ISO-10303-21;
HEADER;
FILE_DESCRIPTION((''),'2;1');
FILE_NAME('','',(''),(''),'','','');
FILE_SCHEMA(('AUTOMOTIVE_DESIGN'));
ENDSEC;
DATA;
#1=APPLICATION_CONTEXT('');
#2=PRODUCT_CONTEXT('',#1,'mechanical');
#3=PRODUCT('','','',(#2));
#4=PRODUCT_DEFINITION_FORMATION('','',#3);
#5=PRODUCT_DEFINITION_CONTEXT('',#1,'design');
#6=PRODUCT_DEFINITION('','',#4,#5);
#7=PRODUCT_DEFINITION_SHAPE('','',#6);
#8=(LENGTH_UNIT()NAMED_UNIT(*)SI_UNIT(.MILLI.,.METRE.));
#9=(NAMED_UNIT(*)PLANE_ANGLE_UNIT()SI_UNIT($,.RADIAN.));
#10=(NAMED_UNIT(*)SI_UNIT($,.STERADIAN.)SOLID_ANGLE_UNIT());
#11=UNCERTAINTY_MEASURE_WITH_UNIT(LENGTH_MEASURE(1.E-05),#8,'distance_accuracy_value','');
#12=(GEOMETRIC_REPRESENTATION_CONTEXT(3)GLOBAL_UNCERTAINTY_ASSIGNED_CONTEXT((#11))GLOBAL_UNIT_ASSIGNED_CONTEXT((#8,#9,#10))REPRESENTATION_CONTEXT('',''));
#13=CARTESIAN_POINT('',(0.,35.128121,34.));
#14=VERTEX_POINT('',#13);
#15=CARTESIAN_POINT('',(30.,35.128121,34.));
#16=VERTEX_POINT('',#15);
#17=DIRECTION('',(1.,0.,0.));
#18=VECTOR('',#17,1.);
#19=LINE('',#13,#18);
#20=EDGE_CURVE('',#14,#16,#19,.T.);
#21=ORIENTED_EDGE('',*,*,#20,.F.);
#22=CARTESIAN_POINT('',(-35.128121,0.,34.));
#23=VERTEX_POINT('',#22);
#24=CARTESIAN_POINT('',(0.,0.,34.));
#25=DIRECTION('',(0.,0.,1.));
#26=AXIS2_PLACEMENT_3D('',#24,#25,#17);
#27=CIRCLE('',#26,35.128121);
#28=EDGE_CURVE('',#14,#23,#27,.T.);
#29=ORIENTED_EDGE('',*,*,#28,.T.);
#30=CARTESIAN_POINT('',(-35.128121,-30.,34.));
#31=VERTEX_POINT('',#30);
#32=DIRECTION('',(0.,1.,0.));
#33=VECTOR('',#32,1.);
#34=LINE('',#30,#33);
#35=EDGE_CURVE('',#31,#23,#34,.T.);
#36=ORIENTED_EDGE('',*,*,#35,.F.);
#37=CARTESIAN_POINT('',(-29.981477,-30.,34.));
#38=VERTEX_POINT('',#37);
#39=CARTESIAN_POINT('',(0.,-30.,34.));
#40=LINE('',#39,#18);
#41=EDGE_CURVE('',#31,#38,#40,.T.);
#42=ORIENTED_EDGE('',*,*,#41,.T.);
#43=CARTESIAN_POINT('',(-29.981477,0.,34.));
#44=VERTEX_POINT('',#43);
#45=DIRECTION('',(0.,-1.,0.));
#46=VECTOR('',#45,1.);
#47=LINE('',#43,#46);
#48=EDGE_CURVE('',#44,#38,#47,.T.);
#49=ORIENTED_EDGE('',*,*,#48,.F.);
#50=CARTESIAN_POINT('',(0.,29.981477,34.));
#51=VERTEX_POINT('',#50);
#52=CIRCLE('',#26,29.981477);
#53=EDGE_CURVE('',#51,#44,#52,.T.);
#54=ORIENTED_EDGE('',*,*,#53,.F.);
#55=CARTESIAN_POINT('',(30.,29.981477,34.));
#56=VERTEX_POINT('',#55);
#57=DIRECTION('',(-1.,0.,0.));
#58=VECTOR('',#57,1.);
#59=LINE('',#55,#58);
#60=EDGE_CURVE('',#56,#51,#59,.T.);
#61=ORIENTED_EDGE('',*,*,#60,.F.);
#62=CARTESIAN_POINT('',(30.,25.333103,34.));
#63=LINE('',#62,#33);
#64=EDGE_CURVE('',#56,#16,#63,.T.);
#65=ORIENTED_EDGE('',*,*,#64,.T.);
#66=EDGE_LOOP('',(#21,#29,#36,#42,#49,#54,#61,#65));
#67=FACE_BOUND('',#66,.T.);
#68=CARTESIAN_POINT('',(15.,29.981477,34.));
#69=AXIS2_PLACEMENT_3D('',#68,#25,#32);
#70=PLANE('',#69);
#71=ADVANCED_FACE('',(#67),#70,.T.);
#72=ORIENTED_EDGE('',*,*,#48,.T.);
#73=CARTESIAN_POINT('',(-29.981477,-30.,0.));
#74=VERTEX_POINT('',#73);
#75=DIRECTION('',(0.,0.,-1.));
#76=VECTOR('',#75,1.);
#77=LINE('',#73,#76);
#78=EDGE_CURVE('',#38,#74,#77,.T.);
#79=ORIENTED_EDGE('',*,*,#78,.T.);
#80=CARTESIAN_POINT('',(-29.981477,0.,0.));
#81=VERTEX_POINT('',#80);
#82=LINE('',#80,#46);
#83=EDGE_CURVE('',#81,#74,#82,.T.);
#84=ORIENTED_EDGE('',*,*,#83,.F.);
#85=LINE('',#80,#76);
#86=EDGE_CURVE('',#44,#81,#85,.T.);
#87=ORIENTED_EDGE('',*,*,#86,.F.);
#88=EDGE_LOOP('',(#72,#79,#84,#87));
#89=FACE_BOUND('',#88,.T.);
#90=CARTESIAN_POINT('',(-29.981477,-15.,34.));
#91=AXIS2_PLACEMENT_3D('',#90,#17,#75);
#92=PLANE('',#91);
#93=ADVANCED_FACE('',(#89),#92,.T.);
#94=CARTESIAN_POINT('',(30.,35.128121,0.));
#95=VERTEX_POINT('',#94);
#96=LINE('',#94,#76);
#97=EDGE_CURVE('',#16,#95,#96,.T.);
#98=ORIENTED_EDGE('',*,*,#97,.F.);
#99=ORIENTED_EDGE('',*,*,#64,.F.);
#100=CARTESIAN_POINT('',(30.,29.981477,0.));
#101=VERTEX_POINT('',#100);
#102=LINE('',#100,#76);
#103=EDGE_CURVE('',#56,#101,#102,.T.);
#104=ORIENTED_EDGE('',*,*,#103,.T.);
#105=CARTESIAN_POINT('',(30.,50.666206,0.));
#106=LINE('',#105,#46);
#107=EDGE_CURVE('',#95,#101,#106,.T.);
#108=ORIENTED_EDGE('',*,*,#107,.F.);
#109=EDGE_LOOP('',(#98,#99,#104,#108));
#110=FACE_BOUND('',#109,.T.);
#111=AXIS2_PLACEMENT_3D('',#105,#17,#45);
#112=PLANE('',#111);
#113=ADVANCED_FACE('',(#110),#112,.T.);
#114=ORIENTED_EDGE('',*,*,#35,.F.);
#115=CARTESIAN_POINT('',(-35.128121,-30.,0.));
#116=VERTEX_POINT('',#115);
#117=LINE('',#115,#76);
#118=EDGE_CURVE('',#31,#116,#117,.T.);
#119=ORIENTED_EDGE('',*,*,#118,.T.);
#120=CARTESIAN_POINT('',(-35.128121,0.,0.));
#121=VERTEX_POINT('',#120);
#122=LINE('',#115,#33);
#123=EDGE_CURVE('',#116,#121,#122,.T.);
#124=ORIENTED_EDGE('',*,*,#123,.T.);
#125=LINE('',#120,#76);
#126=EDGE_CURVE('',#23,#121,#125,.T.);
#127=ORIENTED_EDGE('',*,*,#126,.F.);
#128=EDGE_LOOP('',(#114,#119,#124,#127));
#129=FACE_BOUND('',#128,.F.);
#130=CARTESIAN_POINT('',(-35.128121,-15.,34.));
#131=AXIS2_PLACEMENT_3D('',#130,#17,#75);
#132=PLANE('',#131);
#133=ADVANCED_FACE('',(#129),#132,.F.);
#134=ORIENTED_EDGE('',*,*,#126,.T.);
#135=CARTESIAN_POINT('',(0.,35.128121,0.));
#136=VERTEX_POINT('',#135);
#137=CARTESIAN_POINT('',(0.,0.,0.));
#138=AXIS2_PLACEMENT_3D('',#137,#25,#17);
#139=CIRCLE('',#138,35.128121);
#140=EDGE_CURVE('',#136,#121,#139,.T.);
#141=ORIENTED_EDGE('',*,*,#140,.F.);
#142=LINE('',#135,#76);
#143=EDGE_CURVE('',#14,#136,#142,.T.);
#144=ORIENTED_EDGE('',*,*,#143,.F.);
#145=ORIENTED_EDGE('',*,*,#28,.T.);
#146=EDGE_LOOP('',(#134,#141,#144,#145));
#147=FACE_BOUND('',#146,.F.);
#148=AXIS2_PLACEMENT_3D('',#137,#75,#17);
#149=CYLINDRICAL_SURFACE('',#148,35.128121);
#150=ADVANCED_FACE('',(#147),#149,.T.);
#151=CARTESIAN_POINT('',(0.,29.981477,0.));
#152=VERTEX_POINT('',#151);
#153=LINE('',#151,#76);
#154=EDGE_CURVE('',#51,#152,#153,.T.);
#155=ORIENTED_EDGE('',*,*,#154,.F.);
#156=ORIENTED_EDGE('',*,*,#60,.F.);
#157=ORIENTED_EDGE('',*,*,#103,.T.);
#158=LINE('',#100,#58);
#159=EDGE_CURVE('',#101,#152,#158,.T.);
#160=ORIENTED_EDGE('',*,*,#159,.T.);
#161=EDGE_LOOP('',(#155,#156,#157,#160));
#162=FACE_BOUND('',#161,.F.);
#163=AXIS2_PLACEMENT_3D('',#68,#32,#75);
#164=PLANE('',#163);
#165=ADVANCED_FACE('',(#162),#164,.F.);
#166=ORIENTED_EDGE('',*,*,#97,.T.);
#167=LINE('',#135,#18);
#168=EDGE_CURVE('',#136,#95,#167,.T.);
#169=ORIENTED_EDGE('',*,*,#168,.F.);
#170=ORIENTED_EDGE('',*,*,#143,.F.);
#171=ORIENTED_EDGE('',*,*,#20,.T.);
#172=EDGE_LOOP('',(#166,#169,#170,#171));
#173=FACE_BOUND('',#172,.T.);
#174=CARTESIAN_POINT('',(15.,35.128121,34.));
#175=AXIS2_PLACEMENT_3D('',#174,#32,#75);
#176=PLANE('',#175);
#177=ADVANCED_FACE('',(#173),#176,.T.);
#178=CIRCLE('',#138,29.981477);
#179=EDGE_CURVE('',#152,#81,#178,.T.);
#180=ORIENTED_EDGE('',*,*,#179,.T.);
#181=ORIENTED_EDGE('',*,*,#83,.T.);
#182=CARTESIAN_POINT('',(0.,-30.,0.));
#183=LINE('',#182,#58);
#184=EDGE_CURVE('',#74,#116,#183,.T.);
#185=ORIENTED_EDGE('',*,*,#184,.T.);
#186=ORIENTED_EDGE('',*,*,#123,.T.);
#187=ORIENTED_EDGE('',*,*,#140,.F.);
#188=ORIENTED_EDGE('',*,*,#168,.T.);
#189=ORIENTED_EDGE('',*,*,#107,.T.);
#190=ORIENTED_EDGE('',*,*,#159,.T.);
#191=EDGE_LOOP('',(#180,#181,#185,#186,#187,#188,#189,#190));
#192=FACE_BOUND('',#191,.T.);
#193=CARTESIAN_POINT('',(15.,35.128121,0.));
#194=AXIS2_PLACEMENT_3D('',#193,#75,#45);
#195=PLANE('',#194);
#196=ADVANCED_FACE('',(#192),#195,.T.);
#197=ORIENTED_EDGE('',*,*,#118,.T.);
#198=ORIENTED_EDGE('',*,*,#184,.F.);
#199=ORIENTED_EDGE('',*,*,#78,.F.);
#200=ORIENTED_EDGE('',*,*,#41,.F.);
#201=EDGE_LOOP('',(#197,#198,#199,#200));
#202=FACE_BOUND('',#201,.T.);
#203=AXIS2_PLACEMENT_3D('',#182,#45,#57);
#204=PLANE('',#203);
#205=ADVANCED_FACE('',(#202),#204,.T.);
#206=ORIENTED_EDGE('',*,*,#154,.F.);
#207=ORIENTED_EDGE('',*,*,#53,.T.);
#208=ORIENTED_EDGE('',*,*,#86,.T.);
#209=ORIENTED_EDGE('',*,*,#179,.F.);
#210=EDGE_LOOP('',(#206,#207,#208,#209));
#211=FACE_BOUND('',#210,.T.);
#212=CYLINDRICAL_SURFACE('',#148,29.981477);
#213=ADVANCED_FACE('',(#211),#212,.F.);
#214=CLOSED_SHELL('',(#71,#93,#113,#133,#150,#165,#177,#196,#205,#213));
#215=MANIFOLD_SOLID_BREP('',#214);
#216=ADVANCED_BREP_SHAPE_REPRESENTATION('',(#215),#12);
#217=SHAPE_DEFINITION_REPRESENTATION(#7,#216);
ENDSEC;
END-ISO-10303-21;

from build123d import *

# Parameters (mm, degrees)
F0_R     = 35.128120954
F0_R_2   = 29.9814765583
F1_DEPTH = 34
F3_DEPTH = 56.7
F4_DEPTH = 15
F5_DEPTH = 15
F6_DEPTH = 15
F7_DEPTH = 15


# Not quite as in the source:
# - a feature names something its author has since deleted; it is built from what else it names


with BuildPart() as f1:
    # F0 (on Top) → F1 (new body)
    with BuildSketch(Plane.XY):
        Circle(F0_R)
        Circle(F0_R_2, mode=Mode.SUBTRACT)
    extrude(amount=F1_DEPTH)

    # F2 (on Top) → F3 (cut)
    with BuildSketch(Plane.XY):
        Polygon((0, 50.666205585), (0, 0), (-44.6641780436, 0), (-44.6641780436, -44.4084256887), (0, -44.4084256887), (0, -49.6323108673), (44.1417917609, -49.6323108673), (44.1417917609, 0), (47.7985069156, 0), (47.7985069156, 50.666205585), align=None)
    extrude(amount=F3_DEPTH, mode=Mode.SUBTRACT)

    # F4 (add): a face of the model
    f4_faces = [f1.faces().sort_by_distance(p)[0] for p in [
        (0, 32.5547987561, 17),
    ]]
    extrude(f4_faces, amount=F4_DEPTH)

    # F5 (add): a face of the model
    f5_faces = [f1.faces().sort_by_distance(p)[0] for p in [
        (-32.5547987561, 0, 17),
    ]]
    extrude(f5_faces, amount=F5_DEPTH)

    # F6 (add): a face of the model
    f6_faces = [f1.faces().sort_by_distance(p)[0] for p in [
        (-32.5547987561, -15, 17),
    ]]
    extrude(f6_faces, amount=F6_DEPTH)

    # F7 (add): a face of the model
    f7_faces = [f1.faces().sort_by_distance(p)[0] for p in [
        (15, 32.5547987561, 17),
    ]]
    extrude(f7_faces, amount=F7_DEPTH)


solid = f1.part
